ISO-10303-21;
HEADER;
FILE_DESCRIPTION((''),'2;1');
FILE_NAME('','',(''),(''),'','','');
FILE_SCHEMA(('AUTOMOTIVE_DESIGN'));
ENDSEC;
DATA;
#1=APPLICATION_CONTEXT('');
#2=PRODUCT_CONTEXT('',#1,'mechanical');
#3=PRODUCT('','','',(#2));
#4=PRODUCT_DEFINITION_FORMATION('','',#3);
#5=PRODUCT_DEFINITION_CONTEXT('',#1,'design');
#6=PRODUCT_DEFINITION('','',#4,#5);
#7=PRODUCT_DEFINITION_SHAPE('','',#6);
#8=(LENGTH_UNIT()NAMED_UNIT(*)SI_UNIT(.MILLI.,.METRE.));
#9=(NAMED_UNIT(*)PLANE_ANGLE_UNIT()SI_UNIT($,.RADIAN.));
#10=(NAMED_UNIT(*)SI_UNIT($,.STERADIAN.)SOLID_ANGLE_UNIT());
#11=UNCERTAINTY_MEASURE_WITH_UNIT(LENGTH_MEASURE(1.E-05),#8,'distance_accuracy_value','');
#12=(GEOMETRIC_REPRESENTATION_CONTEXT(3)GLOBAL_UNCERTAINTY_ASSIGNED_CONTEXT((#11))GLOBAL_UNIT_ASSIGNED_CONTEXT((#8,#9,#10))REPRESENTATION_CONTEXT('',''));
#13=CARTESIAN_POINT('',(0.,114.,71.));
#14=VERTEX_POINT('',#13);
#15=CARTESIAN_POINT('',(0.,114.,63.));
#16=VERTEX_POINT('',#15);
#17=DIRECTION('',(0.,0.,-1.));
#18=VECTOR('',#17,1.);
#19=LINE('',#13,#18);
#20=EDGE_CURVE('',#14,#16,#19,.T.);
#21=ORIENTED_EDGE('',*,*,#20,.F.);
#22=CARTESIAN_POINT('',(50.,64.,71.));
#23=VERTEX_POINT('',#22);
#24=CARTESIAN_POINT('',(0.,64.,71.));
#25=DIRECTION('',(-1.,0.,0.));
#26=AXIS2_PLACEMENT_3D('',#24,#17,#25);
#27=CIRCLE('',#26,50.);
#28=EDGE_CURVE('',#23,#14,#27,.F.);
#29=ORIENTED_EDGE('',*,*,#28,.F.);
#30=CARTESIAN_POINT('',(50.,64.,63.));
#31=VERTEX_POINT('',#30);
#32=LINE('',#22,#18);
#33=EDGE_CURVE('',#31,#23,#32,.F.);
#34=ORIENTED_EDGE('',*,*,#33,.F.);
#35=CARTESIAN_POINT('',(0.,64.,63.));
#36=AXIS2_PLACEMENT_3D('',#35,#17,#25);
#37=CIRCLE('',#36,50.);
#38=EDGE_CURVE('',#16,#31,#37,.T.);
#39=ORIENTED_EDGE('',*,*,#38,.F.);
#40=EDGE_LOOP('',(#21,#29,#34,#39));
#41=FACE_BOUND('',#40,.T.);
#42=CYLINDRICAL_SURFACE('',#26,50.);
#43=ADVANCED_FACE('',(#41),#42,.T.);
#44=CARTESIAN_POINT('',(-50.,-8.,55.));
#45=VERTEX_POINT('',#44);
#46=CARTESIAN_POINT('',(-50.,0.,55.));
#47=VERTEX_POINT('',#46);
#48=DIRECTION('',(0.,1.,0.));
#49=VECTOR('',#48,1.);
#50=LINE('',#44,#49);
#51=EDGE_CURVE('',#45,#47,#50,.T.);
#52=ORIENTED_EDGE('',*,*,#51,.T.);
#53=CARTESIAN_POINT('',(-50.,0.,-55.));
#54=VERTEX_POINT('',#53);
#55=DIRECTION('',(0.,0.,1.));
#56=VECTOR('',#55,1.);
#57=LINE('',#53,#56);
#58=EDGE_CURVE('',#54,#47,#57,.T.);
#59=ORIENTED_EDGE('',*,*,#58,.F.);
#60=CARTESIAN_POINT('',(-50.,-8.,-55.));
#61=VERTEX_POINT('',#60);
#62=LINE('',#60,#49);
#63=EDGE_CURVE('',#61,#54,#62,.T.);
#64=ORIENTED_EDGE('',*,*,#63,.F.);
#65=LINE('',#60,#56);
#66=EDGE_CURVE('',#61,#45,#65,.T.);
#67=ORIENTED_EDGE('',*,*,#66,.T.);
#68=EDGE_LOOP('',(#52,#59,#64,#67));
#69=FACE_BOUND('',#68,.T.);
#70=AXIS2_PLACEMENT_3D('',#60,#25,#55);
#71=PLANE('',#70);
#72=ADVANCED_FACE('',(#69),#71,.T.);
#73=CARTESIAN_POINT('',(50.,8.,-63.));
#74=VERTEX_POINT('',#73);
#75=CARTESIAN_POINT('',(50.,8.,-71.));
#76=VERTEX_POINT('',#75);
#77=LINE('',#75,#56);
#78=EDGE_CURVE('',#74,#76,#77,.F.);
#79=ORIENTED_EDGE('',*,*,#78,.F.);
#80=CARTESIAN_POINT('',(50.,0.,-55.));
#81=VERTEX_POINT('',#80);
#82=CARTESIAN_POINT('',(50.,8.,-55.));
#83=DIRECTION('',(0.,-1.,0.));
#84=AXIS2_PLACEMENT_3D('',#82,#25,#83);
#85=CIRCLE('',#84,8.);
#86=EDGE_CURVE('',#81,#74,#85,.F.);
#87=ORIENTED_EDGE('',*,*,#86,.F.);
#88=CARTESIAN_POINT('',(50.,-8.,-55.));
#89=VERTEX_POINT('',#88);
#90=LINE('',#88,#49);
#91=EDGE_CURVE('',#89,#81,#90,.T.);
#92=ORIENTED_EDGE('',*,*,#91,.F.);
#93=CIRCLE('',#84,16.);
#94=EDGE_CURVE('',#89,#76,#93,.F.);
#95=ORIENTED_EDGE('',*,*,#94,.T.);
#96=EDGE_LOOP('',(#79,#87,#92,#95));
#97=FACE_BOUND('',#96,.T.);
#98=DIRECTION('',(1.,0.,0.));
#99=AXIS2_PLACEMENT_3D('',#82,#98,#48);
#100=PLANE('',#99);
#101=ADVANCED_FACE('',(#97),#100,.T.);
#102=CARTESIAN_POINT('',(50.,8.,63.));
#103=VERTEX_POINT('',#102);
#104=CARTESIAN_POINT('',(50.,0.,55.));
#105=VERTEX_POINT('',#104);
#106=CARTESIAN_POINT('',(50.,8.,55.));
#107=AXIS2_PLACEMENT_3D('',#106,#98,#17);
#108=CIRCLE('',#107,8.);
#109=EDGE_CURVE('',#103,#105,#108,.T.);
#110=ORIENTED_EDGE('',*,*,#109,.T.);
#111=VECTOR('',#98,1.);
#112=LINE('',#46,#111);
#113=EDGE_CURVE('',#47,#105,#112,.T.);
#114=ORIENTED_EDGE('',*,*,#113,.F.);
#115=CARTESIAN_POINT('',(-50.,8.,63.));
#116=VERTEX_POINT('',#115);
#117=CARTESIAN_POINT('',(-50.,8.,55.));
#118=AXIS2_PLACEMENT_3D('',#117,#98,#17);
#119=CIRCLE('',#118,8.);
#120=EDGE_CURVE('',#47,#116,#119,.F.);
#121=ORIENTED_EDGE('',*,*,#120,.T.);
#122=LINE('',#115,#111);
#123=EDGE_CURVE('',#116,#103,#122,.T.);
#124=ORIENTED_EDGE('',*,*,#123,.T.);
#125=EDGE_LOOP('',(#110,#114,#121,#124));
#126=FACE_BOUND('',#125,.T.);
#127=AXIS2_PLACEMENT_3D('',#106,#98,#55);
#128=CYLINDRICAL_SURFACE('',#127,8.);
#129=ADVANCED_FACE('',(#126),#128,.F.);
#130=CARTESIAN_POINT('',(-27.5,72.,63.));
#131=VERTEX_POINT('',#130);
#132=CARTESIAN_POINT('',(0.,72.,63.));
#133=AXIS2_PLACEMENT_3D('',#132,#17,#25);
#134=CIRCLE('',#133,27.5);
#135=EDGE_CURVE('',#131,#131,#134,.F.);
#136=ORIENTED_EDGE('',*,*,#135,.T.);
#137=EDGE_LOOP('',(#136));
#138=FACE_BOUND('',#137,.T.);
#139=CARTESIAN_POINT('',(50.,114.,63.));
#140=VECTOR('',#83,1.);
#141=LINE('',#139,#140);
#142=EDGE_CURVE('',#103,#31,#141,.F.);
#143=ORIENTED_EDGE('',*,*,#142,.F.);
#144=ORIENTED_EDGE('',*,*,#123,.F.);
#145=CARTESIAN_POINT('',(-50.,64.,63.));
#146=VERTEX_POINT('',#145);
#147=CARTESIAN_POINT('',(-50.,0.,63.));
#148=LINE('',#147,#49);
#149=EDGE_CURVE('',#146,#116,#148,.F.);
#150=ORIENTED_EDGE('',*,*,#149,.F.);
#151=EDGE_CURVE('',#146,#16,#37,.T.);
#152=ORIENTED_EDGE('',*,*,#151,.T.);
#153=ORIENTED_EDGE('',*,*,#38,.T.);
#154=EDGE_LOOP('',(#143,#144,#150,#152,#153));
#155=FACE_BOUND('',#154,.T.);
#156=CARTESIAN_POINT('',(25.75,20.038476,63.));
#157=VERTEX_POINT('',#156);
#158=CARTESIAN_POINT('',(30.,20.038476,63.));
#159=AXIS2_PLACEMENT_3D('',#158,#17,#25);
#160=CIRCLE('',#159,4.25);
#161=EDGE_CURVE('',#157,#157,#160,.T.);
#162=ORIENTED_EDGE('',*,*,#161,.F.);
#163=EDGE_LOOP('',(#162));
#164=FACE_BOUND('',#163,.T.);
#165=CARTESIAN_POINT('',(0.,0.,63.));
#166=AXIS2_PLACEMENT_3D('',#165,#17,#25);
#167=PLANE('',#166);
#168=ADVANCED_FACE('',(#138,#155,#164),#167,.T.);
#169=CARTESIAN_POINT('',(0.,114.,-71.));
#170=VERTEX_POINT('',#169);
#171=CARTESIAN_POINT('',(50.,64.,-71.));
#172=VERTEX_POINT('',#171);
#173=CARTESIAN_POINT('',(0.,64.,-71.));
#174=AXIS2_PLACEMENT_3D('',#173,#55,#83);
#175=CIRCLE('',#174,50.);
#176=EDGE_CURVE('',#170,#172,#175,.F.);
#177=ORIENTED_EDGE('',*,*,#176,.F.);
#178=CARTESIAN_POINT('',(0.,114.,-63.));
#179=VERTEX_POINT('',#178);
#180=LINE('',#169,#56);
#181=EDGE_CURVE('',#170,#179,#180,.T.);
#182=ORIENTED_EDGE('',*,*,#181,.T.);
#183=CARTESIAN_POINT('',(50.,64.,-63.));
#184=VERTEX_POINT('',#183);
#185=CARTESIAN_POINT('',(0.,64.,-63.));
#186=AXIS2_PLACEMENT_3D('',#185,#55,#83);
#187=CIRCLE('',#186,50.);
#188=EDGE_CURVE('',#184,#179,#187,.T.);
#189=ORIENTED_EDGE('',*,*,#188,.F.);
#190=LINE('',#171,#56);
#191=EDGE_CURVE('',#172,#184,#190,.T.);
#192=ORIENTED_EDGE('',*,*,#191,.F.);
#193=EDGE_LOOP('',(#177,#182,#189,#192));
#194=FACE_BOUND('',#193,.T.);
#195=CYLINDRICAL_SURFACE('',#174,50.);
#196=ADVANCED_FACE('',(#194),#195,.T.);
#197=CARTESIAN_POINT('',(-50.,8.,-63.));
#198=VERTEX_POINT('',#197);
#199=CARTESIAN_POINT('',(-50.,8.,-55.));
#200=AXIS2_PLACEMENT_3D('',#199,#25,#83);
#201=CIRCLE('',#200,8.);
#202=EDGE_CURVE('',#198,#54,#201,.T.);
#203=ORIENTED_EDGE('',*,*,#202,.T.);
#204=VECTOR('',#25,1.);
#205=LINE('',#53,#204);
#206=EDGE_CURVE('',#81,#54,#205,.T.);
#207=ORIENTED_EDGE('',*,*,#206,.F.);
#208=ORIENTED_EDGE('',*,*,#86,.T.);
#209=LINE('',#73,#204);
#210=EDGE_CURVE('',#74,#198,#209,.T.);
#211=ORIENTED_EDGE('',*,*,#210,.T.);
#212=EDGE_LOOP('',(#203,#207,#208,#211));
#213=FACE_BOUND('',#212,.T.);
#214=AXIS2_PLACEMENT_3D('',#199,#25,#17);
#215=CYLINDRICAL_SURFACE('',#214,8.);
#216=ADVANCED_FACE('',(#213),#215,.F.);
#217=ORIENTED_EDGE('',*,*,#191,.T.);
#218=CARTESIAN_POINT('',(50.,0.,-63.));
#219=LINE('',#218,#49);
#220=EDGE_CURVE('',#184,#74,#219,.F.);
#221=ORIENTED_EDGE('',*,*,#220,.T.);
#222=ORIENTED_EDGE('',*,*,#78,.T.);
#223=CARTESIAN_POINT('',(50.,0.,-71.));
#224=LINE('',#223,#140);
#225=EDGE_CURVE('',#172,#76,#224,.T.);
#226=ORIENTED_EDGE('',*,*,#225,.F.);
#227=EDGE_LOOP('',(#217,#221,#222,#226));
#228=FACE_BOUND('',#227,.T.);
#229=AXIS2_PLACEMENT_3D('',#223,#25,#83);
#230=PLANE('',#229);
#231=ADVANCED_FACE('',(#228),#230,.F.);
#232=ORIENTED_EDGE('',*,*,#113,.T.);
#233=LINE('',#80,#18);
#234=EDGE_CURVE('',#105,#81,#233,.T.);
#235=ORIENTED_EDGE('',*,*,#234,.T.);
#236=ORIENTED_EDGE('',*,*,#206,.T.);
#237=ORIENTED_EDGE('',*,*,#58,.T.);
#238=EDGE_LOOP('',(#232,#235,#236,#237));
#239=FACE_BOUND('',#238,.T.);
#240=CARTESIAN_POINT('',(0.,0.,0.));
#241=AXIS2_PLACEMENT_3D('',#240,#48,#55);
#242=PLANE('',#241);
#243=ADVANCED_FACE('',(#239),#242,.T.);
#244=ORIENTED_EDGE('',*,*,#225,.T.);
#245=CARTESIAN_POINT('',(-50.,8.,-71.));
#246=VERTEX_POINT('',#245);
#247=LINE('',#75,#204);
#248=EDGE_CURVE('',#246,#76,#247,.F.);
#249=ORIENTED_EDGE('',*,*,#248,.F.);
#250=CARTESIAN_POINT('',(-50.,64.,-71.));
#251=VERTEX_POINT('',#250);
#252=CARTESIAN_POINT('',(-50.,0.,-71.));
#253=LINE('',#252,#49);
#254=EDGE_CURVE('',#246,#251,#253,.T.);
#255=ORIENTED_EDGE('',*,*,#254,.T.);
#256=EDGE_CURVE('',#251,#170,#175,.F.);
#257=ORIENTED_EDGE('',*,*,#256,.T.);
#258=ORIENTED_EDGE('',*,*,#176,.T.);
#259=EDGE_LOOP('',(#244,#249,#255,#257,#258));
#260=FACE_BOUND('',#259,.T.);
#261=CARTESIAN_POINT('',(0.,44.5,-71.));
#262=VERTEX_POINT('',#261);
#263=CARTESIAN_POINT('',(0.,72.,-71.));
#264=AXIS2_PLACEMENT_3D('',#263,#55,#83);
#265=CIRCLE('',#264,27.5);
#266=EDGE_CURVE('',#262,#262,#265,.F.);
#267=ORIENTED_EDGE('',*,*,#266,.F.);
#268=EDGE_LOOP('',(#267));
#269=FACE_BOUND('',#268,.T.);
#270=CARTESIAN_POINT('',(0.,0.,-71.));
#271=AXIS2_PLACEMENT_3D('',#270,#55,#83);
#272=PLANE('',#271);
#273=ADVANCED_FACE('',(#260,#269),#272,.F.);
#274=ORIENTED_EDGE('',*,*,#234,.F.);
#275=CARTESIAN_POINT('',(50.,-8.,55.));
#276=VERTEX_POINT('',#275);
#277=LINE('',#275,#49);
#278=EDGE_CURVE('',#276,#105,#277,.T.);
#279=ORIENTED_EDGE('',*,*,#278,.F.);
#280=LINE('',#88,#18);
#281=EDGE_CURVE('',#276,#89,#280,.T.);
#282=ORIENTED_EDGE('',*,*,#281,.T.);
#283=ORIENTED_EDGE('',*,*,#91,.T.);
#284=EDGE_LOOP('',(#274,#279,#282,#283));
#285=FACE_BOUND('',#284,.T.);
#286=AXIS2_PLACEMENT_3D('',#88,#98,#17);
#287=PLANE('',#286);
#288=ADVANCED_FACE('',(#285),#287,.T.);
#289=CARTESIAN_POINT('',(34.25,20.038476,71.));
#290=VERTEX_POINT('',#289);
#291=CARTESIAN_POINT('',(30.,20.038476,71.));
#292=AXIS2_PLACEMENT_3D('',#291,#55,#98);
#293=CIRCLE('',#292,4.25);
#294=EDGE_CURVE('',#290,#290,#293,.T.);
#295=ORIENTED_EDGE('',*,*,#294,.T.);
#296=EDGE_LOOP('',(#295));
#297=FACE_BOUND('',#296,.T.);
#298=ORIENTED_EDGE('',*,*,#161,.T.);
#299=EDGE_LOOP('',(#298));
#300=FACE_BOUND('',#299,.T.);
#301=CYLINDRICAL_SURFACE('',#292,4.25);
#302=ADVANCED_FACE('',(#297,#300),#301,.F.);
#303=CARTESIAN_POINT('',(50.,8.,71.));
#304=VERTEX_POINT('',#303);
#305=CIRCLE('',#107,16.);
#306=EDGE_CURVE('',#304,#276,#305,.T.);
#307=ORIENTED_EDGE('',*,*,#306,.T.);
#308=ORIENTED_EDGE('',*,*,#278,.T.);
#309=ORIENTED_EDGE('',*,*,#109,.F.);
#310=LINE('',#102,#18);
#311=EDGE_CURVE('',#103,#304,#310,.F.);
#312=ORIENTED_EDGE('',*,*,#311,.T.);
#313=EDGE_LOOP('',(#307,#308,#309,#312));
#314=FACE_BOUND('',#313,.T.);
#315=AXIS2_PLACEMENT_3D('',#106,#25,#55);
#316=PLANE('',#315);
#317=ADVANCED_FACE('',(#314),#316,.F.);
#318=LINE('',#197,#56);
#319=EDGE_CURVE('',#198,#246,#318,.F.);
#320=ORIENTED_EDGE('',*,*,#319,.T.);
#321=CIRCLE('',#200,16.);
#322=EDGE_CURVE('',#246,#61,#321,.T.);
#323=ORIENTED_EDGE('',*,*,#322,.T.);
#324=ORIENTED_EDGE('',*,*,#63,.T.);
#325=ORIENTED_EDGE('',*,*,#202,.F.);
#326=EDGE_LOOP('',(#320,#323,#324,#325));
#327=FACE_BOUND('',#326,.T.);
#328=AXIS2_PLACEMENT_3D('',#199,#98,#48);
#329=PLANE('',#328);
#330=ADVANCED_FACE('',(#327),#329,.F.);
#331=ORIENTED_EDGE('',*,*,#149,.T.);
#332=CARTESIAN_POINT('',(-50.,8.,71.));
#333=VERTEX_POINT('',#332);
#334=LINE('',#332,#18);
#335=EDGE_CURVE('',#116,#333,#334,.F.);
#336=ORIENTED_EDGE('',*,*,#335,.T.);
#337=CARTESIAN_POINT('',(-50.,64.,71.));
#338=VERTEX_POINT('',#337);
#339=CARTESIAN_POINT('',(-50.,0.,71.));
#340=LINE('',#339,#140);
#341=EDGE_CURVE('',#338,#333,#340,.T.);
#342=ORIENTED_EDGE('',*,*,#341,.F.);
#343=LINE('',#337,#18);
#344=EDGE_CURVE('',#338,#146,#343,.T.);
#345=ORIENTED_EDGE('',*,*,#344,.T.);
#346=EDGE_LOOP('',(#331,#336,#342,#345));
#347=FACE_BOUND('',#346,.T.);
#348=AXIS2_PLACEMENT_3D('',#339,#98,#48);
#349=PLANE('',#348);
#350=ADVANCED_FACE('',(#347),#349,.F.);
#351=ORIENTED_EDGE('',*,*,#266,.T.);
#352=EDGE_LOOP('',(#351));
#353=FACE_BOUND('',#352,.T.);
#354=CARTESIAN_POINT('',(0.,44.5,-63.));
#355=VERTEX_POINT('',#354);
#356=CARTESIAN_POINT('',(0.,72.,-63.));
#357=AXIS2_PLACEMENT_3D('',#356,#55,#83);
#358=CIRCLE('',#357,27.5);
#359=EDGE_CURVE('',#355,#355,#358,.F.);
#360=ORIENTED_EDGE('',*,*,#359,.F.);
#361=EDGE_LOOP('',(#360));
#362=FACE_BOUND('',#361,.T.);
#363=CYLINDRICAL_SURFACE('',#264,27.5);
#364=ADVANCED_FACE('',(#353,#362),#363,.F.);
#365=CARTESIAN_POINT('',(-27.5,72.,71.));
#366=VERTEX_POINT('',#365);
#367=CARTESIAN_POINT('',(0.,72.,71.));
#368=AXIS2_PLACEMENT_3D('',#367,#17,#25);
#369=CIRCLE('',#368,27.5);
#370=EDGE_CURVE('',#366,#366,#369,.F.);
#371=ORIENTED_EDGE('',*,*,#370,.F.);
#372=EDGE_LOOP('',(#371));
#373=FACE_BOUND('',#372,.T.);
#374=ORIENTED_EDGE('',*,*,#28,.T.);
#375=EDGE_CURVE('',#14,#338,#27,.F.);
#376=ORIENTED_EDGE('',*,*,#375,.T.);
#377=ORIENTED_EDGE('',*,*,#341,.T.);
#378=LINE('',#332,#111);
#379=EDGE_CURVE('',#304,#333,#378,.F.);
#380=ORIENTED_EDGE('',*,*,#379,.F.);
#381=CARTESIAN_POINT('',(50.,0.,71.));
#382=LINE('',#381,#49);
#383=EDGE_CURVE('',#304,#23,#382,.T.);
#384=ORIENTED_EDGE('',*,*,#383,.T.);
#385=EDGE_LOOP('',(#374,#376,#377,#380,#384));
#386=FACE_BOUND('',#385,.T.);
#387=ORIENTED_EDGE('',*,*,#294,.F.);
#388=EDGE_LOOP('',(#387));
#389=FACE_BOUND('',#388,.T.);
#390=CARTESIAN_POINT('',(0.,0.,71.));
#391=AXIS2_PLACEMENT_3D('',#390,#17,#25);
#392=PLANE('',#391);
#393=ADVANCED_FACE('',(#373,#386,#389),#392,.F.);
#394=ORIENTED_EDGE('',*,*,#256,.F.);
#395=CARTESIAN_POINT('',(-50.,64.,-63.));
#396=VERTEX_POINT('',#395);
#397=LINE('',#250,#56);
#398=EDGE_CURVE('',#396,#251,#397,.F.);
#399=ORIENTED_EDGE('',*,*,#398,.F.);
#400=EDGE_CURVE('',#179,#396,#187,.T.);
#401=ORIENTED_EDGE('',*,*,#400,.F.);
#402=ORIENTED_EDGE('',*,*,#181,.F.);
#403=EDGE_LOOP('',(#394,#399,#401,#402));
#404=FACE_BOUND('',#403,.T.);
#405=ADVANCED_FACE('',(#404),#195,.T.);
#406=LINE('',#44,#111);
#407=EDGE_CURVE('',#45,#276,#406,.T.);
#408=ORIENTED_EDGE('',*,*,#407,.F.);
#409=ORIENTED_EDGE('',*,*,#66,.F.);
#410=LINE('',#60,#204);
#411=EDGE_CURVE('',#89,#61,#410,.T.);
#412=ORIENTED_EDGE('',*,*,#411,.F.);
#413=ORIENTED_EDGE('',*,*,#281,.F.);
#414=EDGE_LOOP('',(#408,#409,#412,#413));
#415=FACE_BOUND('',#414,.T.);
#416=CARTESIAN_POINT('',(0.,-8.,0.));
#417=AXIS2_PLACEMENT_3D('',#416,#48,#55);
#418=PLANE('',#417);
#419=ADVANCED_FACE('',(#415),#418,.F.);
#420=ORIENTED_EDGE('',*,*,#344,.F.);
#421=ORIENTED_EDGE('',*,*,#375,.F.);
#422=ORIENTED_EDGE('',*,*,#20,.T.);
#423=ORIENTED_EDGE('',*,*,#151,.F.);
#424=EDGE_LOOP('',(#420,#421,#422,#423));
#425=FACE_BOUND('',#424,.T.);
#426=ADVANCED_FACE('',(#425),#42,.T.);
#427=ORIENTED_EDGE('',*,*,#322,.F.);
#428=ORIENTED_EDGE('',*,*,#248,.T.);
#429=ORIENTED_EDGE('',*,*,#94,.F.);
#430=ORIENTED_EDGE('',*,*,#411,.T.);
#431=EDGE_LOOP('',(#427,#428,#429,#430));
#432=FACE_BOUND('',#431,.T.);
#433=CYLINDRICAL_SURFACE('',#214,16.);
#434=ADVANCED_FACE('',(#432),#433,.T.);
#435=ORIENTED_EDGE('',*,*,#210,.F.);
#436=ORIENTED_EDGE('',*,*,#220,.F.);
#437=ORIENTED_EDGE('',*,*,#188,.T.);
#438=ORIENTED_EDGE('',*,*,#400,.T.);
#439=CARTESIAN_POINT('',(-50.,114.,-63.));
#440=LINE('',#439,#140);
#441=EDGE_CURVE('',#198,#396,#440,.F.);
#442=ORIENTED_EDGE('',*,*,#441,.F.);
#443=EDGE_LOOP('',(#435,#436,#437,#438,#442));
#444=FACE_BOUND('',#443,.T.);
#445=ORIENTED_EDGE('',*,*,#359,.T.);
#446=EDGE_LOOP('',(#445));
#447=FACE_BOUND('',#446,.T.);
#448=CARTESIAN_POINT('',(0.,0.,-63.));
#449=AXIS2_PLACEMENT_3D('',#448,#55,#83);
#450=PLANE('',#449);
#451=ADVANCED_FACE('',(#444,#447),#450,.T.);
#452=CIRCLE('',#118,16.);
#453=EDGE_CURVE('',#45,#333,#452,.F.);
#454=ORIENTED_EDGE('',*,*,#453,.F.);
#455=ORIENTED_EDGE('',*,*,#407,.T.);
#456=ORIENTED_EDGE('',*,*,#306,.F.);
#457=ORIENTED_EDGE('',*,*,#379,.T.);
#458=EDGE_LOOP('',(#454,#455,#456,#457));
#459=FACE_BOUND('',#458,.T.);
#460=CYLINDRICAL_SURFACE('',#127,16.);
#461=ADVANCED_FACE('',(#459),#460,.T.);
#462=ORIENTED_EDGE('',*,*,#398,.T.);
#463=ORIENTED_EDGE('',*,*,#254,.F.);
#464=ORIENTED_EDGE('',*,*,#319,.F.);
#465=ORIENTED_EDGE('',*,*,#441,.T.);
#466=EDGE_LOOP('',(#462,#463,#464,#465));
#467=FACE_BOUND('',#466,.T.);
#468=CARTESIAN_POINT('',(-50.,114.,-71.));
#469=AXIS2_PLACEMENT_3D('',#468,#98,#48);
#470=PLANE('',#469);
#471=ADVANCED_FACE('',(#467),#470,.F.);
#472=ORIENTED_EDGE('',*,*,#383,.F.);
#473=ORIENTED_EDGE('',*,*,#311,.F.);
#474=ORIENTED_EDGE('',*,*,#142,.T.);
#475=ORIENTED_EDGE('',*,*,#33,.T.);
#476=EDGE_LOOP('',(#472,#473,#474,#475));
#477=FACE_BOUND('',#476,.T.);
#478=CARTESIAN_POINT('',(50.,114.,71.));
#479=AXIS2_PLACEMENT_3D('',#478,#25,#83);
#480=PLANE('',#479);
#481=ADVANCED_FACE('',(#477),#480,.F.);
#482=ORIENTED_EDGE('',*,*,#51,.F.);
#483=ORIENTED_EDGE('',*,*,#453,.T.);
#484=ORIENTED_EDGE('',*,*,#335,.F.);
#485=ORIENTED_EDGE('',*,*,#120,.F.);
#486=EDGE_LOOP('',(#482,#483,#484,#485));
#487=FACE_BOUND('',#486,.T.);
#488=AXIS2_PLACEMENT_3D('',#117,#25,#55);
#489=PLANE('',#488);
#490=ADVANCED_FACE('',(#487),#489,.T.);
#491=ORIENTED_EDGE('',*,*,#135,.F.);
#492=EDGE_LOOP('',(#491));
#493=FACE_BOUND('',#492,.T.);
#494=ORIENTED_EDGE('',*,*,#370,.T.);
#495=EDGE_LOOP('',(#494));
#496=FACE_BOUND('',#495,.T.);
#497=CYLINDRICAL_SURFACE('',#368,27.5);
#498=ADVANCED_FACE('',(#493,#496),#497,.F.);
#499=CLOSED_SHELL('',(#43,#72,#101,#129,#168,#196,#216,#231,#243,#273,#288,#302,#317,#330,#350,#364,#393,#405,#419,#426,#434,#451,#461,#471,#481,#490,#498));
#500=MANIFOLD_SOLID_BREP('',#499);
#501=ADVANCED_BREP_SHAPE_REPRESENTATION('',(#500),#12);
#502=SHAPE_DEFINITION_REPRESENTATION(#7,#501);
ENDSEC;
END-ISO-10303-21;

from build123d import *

# Parameters (mm, degrees)
SKETCH_10_W                   = 100
SKETCH_10_H                   = 110
SM_BASE_FLANGE_2_DEPTH        = 8
SM_EDGE_FLANGE_3_DEPTH        = 100
SM_START                      = 8
SM_EDGE_FLANGE_3_PROFILE_W    = 100
SM_EDGE_FLANGE_3_PROFILE_H    = 106
SM_EDGE_FLANGE_3_PROFILE_R    = 27.5
SM_EDGE_FLANGE_3_FLAT_DEPTH   = 8
SM_EDGE_FLANGE_3_BEND_DEPTH   = 100
SM_EDGE_FLANGE_3_PROFILE_2_W  = 100
SM_EDGE_FLANGE_3_PROFILE_2_H  = 106
SM_EDGE_FLANGE_3_PROFILE_2_R  = 27.5
SM_EDGE_FLANGE_3_FLAT_2_DEPTH = 8
HOLE_WIZARD_M10_1_D           = 8.5
HOLE_WIZARD_M10_1_DEPTH       = 27.5
HOLE_WIZARD_M10_1_TIP         = 2.553657631
FILLET_1_R                    = 50


# Sheet-metal steps are written as plain solids
with BuildPart() as part:
    # 草图10 → 基体-法兰2 (new body)
    with BuildSketch(Plane(origin=(0, 0, 0), x_dir=(1, 0, 0), z_dir=(0, 1, 0))):
        Rectangle(SKETCH_10_W, SKETCH_10_H)
    extrude(amount=-SM_BASE_FLANGE_2_DEPTH)

    # 边线-法兰3 bend section (across the edge) → 边线-法兰3 (add)
    with BuildSketch(Plane(origin=(-50, 0, 63), x_dir=(0, 0, -1), z_dir=(1, 0, 0))):
        with BuildLine():
            Line((-8, 8), (0, 8))
            ThreePointArc((0, 8), (2.343145751, 2.343145751), (8, 0))
            Line((8, 0), (8, -8))
            ThreePointArc((8, -8), (-3.313708499, -3.313708499), (-8, 8))
        make_face()
    extrude(amount=SM_EDGE_FLANGE_3_DEPTH)

    # 边线-法兰3 profile (on flange) → 边线-法兰3 flat (add)
    with BuildSketch(Plane.XY.offset(63).offset(SM_START)):
        with Locations((0, 61)):
            Rectangle(SM_EDGE_FLANGE_3_PROFILE_W, SM_EDGE_FLANGE_3_PROFILE_H)
        with Locations((0, 72)):
            Circle(SM_EDGE_FLANGE_3_PROFILE_R, mode=Mode.SUBTRACT)
    extrude(amount=-SM_EDGE_FLANGE_3_FLAT_DEPTH)

    # 边线-法兰3 bend section 2 (across the edge) → 边线-法兰3 bend (add)
    with BuildSketch(Plane(origin=(50, 0, -63), x_dir=(0, 0, 1), z_dir=(-1, 0, 0))):
        with BuildLine():
            Line((-8, 8), (0, 8))
            ThreePointArc((0, 8), (2.343145751, 2.343145751), (8, 0))
            Line((8, 0), (8, -8))
            ThreePointArc((8, -8), (-3.313708499, -3.313708499), (-8, 8))
        make_face()
    extrude(amount=SM_EDGE_FLANGE_3_BEND_DEPTH)

    # 边线-法兰3 profile 2 (on flange) → 边线-法兰3 flat 2 (add)
    with BuildSketch(Plane(origin=(0, 0, -63), x_dir=(-1, 0, 0), z_dir=(0, 0, -1)).offset(SM_START)):
        with Locations((0, 61)):
            Rectangle(SM_EDGE_FLANGE_3_PROFILE_2_W, SM_EDGE_FLANGE_3_PROFILE_2_H)
        with Locations((0, 72)):
            Circle(SM_EDGE_FLANGE_3_PROFILE_2_R, mode=Mode.SUBTRACT)
    extrude(amount=-SM_EDGE_FLANGE_3_FLAT_2_DEPTH)

    # M10 螺纹孔1
    with Locations(Plane.XY.offset(71)):
        with Locations((30, 20.038475773)):
            Hole(HOLE_WIZARD_M10_1_D / 2, depth=HOLE_WIZARD_M10_1_DEPTH)
            with Locations((0, 0, -(HOLE_WIZARD_M10_1_DEPTH + HOLE_WIZARD_M10_1_TIP / 2))):  # 118° drill point
                Cone(0, HOLE_WIZARD_M10_1_D / 2, HOLE_WIZARD_M10_1_TIP, mode=Mode.SUBTRACT)

    # 圆角1
    fillet_1_edges = [part.edges().sort_by_distance(p)[0] for p in [
        (50, 114, -67),
        (-50, 114, -67),
        (-50, 114, 67),
        (50, 114, 67),
    ]]
    fillet(fillet_1_edges, radius=FILLET_1_R - 0.0001)  # a hair under: the kernel refuses the full size


solid = part.part
